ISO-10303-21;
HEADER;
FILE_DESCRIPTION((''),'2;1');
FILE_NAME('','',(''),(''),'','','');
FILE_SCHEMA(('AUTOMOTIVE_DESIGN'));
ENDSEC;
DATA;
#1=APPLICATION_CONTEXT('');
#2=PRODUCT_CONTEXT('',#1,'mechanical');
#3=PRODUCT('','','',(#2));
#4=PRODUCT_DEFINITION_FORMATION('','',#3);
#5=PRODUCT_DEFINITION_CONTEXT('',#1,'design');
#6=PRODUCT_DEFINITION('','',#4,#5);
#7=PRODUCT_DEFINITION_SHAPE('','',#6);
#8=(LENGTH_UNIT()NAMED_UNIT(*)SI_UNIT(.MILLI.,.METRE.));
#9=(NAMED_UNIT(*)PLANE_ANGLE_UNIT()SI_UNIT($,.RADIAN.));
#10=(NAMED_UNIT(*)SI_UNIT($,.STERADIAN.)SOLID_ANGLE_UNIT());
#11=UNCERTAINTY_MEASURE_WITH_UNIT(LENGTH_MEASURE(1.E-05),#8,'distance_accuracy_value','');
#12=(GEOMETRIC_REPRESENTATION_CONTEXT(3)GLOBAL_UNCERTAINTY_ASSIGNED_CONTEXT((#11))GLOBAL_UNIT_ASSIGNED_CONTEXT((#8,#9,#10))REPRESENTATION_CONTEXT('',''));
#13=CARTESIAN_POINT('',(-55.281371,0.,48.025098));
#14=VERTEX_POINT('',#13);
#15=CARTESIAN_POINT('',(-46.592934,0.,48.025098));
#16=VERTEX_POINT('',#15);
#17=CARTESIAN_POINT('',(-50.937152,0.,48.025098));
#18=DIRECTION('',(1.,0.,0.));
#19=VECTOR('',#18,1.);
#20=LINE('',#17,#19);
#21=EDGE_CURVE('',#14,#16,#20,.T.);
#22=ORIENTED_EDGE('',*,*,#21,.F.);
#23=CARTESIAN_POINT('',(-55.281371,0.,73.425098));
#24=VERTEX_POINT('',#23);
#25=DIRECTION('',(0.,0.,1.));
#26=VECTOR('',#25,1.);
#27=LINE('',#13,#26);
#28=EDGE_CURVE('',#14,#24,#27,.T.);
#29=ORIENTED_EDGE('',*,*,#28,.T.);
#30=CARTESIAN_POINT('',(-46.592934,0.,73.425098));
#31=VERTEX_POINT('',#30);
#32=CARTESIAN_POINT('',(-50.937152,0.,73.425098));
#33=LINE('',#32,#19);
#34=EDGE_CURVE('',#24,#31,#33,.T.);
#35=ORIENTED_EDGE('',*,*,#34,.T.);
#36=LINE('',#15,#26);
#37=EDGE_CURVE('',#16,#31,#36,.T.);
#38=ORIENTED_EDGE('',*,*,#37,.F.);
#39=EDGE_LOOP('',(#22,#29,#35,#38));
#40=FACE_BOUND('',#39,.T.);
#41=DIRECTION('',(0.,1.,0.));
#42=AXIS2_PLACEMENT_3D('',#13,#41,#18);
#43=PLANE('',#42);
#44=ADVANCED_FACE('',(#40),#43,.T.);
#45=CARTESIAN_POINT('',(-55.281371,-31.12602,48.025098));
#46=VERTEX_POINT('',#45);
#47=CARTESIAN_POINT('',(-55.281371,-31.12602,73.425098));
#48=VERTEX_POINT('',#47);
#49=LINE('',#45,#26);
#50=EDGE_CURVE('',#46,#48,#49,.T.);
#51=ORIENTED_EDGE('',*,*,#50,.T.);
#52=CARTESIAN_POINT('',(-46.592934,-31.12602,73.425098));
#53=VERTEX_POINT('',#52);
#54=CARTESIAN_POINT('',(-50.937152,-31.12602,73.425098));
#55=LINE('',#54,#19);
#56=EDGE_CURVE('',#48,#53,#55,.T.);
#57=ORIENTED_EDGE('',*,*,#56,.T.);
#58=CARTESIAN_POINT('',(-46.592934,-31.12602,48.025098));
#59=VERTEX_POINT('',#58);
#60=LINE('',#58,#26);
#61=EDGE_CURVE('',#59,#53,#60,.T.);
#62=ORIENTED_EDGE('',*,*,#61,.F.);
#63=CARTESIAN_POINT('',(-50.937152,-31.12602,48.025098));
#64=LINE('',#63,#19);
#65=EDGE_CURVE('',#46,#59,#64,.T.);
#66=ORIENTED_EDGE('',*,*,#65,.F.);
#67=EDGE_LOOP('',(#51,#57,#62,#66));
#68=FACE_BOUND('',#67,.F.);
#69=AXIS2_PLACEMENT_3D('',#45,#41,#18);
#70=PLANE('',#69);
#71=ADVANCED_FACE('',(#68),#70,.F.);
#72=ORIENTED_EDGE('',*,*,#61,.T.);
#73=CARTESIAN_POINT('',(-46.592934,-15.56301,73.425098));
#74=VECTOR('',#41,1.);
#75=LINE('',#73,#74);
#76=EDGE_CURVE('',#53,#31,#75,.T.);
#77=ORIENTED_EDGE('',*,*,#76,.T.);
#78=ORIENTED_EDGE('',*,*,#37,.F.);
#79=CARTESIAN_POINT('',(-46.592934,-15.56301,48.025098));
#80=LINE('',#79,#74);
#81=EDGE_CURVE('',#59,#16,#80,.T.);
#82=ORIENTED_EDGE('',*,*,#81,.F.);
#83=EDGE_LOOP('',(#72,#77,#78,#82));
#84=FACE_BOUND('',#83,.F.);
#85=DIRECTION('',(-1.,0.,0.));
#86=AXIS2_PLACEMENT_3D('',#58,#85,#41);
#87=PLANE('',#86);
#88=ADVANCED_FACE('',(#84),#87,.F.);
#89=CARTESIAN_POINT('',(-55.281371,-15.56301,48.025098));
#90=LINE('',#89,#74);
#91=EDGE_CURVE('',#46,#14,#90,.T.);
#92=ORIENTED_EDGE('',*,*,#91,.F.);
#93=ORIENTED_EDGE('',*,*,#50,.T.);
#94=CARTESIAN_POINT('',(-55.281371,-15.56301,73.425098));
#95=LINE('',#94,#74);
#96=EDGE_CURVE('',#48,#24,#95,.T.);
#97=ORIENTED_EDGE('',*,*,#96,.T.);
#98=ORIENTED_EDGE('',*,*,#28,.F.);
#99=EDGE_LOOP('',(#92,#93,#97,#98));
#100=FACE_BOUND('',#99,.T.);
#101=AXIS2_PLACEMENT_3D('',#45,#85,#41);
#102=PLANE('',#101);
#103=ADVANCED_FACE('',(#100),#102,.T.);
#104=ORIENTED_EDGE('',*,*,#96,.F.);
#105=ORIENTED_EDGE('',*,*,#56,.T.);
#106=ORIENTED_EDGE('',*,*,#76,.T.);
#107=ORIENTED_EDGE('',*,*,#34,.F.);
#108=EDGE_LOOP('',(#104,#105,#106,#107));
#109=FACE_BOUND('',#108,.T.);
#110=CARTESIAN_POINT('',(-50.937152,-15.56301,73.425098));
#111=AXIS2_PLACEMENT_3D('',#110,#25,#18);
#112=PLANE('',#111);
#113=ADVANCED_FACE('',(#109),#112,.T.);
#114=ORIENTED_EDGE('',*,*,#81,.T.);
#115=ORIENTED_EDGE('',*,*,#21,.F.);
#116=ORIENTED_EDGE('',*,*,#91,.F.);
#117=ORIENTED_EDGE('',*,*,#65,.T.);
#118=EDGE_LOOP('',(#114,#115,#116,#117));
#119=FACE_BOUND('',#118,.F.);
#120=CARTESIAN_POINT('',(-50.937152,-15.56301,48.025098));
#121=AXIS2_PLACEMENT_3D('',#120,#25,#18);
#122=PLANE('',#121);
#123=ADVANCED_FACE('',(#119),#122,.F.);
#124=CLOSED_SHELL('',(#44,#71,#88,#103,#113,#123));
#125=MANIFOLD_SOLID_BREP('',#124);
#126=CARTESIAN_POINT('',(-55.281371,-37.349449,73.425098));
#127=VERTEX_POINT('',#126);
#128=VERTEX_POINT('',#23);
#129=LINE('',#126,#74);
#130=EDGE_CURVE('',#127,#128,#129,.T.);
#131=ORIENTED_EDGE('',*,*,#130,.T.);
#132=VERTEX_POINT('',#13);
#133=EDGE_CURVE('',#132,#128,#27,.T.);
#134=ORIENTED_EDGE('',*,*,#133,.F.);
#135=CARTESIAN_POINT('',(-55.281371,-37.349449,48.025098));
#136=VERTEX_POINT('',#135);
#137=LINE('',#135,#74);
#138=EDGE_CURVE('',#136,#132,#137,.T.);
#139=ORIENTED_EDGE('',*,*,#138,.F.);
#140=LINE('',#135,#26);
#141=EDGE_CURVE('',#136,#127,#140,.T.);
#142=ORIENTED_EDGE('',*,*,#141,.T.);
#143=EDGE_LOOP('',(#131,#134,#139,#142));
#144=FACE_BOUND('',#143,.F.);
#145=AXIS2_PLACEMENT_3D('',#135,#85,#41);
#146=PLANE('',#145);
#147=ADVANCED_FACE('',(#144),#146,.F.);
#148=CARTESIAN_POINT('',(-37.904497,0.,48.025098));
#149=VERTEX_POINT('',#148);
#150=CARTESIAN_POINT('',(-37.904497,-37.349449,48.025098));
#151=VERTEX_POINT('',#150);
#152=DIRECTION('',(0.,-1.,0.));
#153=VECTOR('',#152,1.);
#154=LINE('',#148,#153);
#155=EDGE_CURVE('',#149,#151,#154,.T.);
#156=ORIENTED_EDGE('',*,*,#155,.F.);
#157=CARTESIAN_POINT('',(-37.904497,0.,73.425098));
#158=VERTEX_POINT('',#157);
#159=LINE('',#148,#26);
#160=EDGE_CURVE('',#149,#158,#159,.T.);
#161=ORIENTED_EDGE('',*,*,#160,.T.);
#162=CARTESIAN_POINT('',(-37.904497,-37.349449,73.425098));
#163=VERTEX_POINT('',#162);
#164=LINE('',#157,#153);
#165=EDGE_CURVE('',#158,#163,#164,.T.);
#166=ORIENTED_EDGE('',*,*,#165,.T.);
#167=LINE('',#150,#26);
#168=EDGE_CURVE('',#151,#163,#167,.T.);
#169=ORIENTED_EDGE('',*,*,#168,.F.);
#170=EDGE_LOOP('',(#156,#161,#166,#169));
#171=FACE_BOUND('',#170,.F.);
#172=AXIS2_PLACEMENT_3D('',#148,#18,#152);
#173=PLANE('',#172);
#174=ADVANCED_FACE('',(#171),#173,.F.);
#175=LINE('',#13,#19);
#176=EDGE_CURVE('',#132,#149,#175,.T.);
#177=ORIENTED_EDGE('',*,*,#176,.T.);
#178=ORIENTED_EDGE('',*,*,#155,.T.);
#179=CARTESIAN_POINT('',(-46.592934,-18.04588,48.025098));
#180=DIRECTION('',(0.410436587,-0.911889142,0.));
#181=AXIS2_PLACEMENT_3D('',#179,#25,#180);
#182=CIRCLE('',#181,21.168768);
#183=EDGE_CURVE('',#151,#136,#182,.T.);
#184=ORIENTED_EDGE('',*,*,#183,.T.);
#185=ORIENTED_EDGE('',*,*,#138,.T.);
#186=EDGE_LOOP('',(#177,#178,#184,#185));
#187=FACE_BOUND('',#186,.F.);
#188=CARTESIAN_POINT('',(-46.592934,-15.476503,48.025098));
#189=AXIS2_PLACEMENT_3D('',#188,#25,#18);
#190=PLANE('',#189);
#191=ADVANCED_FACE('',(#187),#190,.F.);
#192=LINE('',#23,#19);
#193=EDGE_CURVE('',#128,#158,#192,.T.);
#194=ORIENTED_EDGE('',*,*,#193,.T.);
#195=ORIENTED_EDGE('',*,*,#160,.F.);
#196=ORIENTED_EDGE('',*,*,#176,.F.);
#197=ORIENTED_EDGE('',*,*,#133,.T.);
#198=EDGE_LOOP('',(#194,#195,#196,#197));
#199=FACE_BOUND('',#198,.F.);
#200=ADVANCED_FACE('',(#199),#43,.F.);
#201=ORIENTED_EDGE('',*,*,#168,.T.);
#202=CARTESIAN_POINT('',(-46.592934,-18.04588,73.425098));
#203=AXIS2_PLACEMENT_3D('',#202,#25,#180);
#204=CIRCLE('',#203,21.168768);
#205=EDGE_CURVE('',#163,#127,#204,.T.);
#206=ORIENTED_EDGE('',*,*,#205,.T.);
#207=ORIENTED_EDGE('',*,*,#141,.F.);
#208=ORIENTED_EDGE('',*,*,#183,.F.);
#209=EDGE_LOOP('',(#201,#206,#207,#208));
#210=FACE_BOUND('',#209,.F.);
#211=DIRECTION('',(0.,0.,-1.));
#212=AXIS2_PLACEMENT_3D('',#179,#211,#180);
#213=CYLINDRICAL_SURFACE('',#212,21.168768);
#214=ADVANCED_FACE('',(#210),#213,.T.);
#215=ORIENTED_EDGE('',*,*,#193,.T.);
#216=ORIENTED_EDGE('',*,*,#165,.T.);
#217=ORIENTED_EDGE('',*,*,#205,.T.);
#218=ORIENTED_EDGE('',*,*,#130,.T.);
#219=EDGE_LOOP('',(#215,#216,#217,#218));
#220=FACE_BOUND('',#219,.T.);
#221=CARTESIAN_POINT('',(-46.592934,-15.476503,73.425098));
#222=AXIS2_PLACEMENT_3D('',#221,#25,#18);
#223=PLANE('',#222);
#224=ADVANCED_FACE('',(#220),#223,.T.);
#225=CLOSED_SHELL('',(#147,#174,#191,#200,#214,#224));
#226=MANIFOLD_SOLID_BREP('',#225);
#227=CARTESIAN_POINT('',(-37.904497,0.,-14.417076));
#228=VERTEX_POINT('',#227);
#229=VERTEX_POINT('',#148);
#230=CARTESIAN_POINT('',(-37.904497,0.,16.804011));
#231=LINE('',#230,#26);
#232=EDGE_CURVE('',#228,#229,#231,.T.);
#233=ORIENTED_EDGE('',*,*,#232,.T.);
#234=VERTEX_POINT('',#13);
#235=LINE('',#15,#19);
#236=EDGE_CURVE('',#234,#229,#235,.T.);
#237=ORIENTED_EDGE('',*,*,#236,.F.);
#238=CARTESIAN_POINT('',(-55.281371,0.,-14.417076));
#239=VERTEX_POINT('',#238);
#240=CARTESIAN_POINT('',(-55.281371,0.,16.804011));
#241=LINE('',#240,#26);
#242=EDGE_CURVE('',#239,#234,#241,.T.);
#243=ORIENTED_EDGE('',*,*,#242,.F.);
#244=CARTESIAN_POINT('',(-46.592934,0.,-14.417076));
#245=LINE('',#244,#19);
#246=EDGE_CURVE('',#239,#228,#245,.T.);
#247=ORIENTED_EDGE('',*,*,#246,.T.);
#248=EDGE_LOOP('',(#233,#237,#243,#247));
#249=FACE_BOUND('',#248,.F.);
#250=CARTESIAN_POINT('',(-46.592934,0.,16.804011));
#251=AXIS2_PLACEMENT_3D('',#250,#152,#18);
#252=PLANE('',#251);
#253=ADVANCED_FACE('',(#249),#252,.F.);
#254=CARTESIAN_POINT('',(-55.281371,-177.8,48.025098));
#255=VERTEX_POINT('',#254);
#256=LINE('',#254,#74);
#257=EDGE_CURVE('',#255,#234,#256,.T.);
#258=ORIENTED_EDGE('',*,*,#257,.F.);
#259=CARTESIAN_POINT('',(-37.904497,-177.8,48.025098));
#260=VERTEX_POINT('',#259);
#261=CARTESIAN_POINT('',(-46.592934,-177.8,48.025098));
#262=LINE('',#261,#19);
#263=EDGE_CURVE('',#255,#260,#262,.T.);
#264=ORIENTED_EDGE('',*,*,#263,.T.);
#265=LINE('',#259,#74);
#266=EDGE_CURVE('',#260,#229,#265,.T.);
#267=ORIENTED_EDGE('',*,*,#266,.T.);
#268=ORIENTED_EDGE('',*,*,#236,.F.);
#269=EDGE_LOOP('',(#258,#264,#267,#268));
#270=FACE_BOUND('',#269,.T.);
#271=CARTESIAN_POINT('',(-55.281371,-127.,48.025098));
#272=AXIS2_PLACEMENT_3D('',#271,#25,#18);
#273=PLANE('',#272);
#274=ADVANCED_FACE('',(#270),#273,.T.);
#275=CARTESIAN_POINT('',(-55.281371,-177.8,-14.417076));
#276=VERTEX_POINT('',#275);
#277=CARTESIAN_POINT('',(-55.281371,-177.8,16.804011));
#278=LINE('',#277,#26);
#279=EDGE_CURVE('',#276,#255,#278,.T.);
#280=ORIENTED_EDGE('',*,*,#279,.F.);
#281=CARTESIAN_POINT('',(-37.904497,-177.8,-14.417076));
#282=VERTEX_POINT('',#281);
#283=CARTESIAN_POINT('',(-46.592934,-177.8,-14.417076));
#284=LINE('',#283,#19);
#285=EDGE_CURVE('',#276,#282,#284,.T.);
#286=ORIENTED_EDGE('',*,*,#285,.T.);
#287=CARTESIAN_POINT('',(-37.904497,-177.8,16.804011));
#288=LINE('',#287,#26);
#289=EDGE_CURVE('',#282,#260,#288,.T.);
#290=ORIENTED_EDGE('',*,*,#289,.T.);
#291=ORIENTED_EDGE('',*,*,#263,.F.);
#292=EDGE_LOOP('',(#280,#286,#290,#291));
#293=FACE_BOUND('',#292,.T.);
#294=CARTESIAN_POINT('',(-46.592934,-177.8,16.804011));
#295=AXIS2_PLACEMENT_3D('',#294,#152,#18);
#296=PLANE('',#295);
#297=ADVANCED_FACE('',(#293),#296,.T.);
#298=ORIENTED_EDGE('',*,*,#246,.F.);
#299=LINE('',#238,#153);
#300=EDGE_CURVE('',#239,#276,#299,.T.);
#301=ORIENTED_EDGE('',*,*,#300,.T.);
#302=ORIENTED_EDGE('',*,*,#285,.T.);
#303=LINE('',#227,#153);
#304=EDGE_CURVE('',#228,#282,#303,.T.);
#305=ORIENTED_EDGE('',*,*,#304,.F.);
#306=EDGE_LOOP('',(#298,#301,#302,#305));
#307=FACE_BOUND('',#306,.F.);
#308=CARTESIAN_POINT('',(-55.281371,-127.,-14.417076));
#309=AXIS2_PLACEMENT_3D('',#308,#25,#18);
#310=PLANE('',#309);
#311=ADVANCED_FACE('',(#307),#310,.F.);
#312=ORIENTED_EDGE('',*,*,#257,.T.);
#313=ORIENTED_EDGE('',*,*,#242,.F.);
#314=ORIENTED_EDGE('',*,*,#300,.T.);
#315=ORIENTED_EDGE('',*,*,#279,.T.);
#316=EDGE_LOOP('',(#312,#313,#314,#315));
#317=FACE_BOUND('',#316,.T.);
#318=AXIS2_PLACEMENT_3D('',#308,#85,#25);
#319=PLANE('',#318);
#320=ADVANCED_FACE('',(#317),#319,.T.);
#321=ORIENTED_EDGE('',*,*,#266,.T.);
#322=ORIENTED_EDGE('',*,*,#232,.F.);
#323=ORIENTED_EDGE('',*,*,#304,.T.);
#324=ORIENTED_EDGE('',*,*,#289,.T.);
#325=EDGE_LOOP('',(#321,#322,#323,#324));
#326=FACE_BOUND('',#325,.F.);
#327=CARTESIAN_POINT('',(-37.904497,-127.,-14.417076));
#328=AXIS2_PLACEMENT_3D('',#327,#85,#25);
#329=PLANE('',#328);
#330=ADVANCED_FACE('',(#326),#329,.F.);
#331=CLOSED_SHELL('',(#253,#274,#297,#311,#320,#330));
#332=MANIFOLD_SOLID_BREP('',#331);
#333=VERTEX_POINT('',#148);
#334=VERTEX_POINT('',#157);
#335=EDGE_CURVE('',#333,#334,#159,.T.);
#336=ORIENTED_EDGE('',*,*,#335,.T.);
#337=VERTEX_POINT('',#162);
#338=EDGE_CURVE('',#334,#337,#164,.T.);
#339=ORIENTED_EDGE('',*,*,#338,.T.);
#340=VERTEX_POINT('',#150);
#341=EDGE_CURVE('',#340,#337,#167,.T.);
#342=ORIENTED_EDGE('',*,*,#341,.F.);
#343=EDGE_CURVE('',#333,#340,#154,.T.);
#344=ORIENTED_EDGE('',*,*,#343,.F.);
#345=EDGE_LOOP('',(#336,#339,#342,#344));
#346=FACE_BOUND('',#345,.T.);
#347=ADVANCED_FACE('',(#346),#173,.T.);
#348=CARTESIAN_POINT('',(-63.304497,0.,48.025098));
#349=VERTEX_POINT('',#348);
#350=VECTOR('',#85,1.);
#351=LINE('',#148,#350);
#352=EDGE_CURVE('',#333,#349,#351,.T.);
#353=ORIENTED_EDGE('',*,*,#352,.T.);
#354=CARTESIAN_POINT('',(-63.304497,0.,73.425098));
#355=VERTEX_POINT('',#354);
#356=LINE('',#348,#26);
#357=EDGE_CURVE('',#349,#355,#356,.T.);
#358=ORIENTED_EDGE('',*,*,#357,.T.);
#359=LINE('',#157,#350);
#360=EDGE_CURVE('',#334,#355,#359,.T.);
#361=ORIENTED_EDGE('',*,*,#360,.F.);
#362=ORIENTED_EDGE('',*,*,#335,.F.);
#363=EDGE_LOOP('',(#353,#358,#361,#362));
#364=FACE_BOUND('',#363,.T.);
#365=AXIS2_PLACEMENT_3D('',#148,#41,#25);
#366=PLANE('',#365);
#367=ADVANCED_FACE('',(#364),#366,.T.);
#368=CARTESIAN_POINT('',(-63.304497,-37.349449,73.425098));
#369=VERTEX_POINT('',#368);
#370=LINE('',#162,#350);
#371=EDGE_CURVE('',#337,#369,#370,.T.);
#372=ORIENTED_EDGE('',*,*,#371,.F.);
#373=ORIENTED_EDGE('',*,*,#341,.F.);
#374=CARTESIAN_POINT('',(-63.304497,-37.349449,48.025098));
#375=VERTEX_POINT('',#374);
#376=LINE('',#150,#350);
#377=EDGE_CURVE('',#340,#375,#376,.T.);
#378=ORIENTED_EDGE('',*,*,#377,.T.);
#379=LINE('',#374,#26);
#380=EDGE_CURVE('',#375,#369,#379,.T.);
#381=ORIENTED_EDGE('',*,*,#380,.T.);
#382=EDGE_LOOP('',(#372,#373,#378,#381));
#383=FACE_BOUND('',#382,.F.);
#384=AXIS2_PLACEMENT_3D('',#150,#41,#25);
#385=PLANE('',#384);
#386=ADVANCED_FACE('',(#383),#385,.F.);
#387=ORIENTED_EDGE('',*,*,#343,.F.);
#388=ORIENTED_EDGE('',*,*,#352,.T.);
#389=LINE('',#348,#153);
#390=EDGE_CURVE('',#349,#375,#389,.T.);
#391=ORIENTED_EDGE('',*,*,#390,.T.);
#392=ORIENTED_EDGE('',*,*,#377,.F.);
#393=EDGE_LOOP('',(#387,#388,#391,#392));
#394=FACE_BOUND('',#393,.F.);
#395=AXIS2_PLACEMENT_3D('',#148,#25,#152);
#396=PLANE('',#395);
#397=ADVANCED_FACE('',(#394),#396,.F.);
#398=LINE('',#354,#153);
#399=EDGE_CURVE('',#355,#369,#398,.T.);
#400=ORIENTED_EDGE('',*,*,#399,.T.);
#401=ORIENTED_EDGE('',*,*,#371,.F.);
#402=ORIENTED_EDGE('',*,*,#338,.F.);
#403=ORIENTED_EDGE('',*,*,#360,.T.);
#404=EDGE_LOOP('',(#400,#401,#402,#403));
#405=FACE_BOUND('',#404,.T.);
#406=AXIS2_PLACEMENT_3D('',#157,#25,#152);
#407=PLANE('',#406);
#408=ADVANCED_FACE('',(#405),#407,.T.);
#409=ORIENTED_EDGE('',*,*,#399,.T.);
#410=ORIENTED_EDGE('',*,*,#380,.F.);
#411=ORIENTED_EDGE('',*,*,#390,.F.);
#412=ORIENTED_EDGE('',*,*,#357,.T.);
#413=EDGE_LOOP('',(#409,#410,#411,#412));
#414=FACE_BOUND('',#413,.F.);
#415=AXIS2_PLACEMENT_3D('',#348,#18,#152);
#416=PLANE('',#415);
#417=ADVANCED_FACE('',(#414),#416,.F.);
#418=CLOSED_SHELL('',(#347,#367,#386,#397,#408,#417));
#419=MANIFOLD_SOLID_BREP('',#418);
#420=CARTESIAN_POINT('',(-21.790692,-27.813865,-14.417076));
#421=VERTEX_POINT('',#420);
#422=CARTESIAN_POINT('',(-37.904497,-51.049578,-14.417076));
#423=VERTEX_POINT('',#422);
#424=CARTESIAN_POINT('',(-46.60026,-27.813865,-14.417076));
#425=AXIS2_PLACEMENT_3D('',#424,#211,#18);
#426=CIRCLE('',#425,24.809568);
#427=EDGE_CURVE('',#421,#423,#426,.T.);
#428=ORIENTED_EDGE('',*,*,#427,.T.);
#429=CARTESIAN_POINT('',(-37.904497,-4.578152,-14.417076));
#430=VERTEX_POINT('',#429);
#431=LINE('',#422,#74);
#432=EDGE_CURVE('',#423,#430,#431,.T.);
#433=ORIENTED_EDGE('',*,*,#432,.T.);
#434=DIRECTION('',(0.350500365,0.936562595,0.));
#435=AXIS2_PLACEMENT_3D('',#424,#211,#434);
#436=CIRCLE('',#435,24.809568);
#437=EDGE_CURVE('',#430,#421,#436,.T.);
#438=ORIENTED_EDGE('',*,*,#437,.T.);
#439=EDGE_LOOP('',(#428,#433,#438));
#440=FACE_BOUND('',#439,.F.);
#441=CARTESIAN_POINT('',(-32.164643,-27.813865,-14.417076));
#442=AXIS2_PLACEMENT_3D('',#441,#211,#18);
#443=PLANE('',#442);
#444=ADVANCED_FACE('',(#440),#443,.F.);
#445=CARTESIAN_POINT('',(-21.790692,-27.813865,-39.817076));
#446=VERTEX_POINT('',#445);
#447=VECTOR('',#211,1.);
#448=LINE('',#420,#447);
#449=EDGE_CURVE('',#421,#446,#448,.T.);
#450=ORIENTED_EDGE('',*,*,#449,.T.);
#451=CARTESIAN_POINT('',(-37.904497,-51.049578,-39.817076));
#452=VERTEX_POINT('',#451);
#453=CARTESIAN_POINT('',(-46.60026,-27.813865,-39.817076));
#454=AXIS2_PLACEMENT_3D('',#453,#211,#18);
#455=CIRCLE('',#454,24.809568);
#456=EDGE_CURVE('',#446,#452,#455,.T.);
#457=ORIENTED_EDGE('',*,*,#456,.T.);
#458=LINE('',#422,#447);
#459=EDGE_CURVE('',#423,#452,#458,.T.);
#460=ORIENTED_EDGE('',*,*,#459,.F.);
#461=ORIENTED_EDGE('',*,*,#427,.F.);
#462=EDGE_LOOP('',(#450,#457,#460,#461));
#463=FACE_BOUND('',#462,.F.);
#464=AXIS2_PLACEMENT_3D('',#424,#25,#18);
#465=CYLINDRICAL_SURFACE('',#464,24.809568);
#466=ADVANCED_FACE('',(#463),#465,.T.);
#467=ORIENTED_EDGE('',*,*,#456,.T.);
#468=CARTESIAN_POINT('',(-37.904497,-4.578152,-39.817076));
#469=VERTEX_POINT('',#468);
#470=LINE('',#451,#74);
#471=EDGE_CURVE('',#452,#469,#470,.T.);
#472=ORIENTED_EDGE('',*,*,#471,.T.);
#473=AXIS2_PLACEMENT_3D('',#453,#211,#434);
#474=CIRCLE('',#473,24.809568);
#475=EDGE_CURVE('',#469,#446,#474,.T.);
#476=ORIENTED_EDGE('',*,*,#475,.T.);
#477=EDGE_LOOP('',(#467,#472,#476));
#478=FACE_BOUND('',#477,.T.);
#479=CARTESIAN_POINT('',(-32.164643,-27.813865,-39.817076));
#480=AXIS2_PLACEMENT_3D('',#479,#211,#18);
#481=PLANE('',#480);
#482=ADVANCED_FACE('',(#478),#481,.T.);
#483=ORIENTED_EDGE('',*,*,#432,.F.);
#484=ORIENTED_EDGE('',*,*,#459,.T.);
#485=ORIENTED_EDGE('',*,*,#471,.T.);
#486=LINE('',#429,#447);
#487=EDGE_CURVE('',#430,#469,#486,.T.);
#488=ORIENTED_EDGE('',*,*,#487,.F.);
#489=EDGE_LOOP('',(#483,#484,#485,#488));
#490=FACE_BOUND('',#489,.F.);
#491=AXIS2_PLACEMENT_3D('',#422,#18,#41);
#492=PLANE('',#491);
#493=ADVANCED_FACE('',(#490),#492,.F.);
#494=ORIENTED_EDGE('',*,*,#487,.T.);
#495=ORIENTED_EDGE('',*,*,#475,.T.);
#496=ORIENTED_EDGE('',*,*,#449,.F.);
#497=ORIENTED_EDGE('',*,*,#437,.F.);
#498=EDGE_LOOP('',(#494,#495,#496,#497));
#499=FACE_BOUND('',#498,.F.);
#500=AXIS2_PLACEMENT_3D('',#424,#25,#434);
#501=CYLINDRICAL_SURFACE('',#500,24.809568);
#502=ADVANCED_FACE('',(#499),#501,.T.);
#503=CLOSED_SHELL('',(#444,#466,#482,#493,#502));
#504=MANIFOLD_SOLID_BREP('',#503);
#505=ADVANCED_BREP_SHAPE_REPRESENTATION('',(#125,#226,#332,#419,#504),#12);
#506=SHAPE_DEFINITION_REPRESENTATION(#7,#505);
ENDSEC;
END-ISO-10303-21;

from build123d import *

# Parameters (mm, degrees)
F0_W     = 17.3768736422
F0_H     = 62.4421741813
F1_DEPTH = 127
F2_DEPTH = 50.8
F4_DEPTH = 25.4
F6_DEPTH = 25.4
F7_W     = 8.6884368211
F7_H     = 31.1260204762
F8_DEPTH = 25.4
F9_DEPTH = 25.4


with BuildPart() as f1:
    # F0 (on Front) → F1 (new body)
    with BuildSketch(Plane.XZ):
        with Locations((-46.5929340571, 16.8040106073)):
            Rectangle(F0_W, F0_H)
    extrude(amount=F1_DEPTH)

    # F2 (add): a face of the model
    f2_faces = [f1.faces().sort_by_distance(p)[0] for p in [
        (-46.5929340571, -127, 16.8040106073),
    ]]
    extrude(f2_faces, amount=F2_DEPTH)


with BuildPart() as f4:
    # F3 (on face) → F4 (new body)
    with BuildSketch(Plane.XY.offset(48.025097698)):
        with BuildLine():
            ThreePointArc((-37.904497236, -37.3494494503), (-28.8159794009, -29.5392090488), (-25.4241662195, -18.0458799005))
            ThreePointArc((-25.4241662195, -18.0458799005), (-58.0862632055, -0.2689252442), (-55.2813708782, -37.3494494503))
            Line((-55.2813708782, -37.3494494503), (-55.2813708782, 0))
            Line((-55.2813708782, 0), (-37.904497236, 0))
            Line((-37.904497236, 0), (-37.904497236, -37.3494494503))
        make_face()
    extrude(amount=F4_DEPTH)


with BuildPart() as f6:
    # F5 (on face) → F6 (new body)
    with BuildSketch(Plane(origin=(0, 0, -14.4170764834), x_dir=(1, 0, 0), z_dir=(0, 0, -1))):
        with BuildLine():
            ThreePointArc((-37.904497236, 4.5781515434), (-26.2133427827, 13.6756799094), (-21.7906919048, 27.8138648719))
            ThreePointArc((-21.7906919048, 27.8138648719), (-26.2133427827, 41.9520498344), (-37.904497236, 51.0495782003))
            Line((-37.904497236, 51.0495782003), (-37.904497236, 4.5781515434))
        make_face()
    extrude(amount=F6_DEPTH)


with BuildPart() as f8:
    # F7 (on face) → F8 (new body)
    with BuildSketch(Plane.XY.offset(48.025097698)):
        with Locations((-50.9371524677, -15.5630102381)):
            Rectangle(F7_W, F7_H)
    extrude(amount=F8_DEPTH)


with BuildPart() as f9:
    # F9 (new): a face of the model
    f9_faces = [f4.part.faces().sort_by_distance(p)[0] for p in [
        (-37.904497236, -18.6747247252, 60.725097698),
    ]]
    extrude(f9_faces, amount=F9_DEPTH)


solid = Compound([f1.part, f4.part, f6.part, f8.part, f9.part])
